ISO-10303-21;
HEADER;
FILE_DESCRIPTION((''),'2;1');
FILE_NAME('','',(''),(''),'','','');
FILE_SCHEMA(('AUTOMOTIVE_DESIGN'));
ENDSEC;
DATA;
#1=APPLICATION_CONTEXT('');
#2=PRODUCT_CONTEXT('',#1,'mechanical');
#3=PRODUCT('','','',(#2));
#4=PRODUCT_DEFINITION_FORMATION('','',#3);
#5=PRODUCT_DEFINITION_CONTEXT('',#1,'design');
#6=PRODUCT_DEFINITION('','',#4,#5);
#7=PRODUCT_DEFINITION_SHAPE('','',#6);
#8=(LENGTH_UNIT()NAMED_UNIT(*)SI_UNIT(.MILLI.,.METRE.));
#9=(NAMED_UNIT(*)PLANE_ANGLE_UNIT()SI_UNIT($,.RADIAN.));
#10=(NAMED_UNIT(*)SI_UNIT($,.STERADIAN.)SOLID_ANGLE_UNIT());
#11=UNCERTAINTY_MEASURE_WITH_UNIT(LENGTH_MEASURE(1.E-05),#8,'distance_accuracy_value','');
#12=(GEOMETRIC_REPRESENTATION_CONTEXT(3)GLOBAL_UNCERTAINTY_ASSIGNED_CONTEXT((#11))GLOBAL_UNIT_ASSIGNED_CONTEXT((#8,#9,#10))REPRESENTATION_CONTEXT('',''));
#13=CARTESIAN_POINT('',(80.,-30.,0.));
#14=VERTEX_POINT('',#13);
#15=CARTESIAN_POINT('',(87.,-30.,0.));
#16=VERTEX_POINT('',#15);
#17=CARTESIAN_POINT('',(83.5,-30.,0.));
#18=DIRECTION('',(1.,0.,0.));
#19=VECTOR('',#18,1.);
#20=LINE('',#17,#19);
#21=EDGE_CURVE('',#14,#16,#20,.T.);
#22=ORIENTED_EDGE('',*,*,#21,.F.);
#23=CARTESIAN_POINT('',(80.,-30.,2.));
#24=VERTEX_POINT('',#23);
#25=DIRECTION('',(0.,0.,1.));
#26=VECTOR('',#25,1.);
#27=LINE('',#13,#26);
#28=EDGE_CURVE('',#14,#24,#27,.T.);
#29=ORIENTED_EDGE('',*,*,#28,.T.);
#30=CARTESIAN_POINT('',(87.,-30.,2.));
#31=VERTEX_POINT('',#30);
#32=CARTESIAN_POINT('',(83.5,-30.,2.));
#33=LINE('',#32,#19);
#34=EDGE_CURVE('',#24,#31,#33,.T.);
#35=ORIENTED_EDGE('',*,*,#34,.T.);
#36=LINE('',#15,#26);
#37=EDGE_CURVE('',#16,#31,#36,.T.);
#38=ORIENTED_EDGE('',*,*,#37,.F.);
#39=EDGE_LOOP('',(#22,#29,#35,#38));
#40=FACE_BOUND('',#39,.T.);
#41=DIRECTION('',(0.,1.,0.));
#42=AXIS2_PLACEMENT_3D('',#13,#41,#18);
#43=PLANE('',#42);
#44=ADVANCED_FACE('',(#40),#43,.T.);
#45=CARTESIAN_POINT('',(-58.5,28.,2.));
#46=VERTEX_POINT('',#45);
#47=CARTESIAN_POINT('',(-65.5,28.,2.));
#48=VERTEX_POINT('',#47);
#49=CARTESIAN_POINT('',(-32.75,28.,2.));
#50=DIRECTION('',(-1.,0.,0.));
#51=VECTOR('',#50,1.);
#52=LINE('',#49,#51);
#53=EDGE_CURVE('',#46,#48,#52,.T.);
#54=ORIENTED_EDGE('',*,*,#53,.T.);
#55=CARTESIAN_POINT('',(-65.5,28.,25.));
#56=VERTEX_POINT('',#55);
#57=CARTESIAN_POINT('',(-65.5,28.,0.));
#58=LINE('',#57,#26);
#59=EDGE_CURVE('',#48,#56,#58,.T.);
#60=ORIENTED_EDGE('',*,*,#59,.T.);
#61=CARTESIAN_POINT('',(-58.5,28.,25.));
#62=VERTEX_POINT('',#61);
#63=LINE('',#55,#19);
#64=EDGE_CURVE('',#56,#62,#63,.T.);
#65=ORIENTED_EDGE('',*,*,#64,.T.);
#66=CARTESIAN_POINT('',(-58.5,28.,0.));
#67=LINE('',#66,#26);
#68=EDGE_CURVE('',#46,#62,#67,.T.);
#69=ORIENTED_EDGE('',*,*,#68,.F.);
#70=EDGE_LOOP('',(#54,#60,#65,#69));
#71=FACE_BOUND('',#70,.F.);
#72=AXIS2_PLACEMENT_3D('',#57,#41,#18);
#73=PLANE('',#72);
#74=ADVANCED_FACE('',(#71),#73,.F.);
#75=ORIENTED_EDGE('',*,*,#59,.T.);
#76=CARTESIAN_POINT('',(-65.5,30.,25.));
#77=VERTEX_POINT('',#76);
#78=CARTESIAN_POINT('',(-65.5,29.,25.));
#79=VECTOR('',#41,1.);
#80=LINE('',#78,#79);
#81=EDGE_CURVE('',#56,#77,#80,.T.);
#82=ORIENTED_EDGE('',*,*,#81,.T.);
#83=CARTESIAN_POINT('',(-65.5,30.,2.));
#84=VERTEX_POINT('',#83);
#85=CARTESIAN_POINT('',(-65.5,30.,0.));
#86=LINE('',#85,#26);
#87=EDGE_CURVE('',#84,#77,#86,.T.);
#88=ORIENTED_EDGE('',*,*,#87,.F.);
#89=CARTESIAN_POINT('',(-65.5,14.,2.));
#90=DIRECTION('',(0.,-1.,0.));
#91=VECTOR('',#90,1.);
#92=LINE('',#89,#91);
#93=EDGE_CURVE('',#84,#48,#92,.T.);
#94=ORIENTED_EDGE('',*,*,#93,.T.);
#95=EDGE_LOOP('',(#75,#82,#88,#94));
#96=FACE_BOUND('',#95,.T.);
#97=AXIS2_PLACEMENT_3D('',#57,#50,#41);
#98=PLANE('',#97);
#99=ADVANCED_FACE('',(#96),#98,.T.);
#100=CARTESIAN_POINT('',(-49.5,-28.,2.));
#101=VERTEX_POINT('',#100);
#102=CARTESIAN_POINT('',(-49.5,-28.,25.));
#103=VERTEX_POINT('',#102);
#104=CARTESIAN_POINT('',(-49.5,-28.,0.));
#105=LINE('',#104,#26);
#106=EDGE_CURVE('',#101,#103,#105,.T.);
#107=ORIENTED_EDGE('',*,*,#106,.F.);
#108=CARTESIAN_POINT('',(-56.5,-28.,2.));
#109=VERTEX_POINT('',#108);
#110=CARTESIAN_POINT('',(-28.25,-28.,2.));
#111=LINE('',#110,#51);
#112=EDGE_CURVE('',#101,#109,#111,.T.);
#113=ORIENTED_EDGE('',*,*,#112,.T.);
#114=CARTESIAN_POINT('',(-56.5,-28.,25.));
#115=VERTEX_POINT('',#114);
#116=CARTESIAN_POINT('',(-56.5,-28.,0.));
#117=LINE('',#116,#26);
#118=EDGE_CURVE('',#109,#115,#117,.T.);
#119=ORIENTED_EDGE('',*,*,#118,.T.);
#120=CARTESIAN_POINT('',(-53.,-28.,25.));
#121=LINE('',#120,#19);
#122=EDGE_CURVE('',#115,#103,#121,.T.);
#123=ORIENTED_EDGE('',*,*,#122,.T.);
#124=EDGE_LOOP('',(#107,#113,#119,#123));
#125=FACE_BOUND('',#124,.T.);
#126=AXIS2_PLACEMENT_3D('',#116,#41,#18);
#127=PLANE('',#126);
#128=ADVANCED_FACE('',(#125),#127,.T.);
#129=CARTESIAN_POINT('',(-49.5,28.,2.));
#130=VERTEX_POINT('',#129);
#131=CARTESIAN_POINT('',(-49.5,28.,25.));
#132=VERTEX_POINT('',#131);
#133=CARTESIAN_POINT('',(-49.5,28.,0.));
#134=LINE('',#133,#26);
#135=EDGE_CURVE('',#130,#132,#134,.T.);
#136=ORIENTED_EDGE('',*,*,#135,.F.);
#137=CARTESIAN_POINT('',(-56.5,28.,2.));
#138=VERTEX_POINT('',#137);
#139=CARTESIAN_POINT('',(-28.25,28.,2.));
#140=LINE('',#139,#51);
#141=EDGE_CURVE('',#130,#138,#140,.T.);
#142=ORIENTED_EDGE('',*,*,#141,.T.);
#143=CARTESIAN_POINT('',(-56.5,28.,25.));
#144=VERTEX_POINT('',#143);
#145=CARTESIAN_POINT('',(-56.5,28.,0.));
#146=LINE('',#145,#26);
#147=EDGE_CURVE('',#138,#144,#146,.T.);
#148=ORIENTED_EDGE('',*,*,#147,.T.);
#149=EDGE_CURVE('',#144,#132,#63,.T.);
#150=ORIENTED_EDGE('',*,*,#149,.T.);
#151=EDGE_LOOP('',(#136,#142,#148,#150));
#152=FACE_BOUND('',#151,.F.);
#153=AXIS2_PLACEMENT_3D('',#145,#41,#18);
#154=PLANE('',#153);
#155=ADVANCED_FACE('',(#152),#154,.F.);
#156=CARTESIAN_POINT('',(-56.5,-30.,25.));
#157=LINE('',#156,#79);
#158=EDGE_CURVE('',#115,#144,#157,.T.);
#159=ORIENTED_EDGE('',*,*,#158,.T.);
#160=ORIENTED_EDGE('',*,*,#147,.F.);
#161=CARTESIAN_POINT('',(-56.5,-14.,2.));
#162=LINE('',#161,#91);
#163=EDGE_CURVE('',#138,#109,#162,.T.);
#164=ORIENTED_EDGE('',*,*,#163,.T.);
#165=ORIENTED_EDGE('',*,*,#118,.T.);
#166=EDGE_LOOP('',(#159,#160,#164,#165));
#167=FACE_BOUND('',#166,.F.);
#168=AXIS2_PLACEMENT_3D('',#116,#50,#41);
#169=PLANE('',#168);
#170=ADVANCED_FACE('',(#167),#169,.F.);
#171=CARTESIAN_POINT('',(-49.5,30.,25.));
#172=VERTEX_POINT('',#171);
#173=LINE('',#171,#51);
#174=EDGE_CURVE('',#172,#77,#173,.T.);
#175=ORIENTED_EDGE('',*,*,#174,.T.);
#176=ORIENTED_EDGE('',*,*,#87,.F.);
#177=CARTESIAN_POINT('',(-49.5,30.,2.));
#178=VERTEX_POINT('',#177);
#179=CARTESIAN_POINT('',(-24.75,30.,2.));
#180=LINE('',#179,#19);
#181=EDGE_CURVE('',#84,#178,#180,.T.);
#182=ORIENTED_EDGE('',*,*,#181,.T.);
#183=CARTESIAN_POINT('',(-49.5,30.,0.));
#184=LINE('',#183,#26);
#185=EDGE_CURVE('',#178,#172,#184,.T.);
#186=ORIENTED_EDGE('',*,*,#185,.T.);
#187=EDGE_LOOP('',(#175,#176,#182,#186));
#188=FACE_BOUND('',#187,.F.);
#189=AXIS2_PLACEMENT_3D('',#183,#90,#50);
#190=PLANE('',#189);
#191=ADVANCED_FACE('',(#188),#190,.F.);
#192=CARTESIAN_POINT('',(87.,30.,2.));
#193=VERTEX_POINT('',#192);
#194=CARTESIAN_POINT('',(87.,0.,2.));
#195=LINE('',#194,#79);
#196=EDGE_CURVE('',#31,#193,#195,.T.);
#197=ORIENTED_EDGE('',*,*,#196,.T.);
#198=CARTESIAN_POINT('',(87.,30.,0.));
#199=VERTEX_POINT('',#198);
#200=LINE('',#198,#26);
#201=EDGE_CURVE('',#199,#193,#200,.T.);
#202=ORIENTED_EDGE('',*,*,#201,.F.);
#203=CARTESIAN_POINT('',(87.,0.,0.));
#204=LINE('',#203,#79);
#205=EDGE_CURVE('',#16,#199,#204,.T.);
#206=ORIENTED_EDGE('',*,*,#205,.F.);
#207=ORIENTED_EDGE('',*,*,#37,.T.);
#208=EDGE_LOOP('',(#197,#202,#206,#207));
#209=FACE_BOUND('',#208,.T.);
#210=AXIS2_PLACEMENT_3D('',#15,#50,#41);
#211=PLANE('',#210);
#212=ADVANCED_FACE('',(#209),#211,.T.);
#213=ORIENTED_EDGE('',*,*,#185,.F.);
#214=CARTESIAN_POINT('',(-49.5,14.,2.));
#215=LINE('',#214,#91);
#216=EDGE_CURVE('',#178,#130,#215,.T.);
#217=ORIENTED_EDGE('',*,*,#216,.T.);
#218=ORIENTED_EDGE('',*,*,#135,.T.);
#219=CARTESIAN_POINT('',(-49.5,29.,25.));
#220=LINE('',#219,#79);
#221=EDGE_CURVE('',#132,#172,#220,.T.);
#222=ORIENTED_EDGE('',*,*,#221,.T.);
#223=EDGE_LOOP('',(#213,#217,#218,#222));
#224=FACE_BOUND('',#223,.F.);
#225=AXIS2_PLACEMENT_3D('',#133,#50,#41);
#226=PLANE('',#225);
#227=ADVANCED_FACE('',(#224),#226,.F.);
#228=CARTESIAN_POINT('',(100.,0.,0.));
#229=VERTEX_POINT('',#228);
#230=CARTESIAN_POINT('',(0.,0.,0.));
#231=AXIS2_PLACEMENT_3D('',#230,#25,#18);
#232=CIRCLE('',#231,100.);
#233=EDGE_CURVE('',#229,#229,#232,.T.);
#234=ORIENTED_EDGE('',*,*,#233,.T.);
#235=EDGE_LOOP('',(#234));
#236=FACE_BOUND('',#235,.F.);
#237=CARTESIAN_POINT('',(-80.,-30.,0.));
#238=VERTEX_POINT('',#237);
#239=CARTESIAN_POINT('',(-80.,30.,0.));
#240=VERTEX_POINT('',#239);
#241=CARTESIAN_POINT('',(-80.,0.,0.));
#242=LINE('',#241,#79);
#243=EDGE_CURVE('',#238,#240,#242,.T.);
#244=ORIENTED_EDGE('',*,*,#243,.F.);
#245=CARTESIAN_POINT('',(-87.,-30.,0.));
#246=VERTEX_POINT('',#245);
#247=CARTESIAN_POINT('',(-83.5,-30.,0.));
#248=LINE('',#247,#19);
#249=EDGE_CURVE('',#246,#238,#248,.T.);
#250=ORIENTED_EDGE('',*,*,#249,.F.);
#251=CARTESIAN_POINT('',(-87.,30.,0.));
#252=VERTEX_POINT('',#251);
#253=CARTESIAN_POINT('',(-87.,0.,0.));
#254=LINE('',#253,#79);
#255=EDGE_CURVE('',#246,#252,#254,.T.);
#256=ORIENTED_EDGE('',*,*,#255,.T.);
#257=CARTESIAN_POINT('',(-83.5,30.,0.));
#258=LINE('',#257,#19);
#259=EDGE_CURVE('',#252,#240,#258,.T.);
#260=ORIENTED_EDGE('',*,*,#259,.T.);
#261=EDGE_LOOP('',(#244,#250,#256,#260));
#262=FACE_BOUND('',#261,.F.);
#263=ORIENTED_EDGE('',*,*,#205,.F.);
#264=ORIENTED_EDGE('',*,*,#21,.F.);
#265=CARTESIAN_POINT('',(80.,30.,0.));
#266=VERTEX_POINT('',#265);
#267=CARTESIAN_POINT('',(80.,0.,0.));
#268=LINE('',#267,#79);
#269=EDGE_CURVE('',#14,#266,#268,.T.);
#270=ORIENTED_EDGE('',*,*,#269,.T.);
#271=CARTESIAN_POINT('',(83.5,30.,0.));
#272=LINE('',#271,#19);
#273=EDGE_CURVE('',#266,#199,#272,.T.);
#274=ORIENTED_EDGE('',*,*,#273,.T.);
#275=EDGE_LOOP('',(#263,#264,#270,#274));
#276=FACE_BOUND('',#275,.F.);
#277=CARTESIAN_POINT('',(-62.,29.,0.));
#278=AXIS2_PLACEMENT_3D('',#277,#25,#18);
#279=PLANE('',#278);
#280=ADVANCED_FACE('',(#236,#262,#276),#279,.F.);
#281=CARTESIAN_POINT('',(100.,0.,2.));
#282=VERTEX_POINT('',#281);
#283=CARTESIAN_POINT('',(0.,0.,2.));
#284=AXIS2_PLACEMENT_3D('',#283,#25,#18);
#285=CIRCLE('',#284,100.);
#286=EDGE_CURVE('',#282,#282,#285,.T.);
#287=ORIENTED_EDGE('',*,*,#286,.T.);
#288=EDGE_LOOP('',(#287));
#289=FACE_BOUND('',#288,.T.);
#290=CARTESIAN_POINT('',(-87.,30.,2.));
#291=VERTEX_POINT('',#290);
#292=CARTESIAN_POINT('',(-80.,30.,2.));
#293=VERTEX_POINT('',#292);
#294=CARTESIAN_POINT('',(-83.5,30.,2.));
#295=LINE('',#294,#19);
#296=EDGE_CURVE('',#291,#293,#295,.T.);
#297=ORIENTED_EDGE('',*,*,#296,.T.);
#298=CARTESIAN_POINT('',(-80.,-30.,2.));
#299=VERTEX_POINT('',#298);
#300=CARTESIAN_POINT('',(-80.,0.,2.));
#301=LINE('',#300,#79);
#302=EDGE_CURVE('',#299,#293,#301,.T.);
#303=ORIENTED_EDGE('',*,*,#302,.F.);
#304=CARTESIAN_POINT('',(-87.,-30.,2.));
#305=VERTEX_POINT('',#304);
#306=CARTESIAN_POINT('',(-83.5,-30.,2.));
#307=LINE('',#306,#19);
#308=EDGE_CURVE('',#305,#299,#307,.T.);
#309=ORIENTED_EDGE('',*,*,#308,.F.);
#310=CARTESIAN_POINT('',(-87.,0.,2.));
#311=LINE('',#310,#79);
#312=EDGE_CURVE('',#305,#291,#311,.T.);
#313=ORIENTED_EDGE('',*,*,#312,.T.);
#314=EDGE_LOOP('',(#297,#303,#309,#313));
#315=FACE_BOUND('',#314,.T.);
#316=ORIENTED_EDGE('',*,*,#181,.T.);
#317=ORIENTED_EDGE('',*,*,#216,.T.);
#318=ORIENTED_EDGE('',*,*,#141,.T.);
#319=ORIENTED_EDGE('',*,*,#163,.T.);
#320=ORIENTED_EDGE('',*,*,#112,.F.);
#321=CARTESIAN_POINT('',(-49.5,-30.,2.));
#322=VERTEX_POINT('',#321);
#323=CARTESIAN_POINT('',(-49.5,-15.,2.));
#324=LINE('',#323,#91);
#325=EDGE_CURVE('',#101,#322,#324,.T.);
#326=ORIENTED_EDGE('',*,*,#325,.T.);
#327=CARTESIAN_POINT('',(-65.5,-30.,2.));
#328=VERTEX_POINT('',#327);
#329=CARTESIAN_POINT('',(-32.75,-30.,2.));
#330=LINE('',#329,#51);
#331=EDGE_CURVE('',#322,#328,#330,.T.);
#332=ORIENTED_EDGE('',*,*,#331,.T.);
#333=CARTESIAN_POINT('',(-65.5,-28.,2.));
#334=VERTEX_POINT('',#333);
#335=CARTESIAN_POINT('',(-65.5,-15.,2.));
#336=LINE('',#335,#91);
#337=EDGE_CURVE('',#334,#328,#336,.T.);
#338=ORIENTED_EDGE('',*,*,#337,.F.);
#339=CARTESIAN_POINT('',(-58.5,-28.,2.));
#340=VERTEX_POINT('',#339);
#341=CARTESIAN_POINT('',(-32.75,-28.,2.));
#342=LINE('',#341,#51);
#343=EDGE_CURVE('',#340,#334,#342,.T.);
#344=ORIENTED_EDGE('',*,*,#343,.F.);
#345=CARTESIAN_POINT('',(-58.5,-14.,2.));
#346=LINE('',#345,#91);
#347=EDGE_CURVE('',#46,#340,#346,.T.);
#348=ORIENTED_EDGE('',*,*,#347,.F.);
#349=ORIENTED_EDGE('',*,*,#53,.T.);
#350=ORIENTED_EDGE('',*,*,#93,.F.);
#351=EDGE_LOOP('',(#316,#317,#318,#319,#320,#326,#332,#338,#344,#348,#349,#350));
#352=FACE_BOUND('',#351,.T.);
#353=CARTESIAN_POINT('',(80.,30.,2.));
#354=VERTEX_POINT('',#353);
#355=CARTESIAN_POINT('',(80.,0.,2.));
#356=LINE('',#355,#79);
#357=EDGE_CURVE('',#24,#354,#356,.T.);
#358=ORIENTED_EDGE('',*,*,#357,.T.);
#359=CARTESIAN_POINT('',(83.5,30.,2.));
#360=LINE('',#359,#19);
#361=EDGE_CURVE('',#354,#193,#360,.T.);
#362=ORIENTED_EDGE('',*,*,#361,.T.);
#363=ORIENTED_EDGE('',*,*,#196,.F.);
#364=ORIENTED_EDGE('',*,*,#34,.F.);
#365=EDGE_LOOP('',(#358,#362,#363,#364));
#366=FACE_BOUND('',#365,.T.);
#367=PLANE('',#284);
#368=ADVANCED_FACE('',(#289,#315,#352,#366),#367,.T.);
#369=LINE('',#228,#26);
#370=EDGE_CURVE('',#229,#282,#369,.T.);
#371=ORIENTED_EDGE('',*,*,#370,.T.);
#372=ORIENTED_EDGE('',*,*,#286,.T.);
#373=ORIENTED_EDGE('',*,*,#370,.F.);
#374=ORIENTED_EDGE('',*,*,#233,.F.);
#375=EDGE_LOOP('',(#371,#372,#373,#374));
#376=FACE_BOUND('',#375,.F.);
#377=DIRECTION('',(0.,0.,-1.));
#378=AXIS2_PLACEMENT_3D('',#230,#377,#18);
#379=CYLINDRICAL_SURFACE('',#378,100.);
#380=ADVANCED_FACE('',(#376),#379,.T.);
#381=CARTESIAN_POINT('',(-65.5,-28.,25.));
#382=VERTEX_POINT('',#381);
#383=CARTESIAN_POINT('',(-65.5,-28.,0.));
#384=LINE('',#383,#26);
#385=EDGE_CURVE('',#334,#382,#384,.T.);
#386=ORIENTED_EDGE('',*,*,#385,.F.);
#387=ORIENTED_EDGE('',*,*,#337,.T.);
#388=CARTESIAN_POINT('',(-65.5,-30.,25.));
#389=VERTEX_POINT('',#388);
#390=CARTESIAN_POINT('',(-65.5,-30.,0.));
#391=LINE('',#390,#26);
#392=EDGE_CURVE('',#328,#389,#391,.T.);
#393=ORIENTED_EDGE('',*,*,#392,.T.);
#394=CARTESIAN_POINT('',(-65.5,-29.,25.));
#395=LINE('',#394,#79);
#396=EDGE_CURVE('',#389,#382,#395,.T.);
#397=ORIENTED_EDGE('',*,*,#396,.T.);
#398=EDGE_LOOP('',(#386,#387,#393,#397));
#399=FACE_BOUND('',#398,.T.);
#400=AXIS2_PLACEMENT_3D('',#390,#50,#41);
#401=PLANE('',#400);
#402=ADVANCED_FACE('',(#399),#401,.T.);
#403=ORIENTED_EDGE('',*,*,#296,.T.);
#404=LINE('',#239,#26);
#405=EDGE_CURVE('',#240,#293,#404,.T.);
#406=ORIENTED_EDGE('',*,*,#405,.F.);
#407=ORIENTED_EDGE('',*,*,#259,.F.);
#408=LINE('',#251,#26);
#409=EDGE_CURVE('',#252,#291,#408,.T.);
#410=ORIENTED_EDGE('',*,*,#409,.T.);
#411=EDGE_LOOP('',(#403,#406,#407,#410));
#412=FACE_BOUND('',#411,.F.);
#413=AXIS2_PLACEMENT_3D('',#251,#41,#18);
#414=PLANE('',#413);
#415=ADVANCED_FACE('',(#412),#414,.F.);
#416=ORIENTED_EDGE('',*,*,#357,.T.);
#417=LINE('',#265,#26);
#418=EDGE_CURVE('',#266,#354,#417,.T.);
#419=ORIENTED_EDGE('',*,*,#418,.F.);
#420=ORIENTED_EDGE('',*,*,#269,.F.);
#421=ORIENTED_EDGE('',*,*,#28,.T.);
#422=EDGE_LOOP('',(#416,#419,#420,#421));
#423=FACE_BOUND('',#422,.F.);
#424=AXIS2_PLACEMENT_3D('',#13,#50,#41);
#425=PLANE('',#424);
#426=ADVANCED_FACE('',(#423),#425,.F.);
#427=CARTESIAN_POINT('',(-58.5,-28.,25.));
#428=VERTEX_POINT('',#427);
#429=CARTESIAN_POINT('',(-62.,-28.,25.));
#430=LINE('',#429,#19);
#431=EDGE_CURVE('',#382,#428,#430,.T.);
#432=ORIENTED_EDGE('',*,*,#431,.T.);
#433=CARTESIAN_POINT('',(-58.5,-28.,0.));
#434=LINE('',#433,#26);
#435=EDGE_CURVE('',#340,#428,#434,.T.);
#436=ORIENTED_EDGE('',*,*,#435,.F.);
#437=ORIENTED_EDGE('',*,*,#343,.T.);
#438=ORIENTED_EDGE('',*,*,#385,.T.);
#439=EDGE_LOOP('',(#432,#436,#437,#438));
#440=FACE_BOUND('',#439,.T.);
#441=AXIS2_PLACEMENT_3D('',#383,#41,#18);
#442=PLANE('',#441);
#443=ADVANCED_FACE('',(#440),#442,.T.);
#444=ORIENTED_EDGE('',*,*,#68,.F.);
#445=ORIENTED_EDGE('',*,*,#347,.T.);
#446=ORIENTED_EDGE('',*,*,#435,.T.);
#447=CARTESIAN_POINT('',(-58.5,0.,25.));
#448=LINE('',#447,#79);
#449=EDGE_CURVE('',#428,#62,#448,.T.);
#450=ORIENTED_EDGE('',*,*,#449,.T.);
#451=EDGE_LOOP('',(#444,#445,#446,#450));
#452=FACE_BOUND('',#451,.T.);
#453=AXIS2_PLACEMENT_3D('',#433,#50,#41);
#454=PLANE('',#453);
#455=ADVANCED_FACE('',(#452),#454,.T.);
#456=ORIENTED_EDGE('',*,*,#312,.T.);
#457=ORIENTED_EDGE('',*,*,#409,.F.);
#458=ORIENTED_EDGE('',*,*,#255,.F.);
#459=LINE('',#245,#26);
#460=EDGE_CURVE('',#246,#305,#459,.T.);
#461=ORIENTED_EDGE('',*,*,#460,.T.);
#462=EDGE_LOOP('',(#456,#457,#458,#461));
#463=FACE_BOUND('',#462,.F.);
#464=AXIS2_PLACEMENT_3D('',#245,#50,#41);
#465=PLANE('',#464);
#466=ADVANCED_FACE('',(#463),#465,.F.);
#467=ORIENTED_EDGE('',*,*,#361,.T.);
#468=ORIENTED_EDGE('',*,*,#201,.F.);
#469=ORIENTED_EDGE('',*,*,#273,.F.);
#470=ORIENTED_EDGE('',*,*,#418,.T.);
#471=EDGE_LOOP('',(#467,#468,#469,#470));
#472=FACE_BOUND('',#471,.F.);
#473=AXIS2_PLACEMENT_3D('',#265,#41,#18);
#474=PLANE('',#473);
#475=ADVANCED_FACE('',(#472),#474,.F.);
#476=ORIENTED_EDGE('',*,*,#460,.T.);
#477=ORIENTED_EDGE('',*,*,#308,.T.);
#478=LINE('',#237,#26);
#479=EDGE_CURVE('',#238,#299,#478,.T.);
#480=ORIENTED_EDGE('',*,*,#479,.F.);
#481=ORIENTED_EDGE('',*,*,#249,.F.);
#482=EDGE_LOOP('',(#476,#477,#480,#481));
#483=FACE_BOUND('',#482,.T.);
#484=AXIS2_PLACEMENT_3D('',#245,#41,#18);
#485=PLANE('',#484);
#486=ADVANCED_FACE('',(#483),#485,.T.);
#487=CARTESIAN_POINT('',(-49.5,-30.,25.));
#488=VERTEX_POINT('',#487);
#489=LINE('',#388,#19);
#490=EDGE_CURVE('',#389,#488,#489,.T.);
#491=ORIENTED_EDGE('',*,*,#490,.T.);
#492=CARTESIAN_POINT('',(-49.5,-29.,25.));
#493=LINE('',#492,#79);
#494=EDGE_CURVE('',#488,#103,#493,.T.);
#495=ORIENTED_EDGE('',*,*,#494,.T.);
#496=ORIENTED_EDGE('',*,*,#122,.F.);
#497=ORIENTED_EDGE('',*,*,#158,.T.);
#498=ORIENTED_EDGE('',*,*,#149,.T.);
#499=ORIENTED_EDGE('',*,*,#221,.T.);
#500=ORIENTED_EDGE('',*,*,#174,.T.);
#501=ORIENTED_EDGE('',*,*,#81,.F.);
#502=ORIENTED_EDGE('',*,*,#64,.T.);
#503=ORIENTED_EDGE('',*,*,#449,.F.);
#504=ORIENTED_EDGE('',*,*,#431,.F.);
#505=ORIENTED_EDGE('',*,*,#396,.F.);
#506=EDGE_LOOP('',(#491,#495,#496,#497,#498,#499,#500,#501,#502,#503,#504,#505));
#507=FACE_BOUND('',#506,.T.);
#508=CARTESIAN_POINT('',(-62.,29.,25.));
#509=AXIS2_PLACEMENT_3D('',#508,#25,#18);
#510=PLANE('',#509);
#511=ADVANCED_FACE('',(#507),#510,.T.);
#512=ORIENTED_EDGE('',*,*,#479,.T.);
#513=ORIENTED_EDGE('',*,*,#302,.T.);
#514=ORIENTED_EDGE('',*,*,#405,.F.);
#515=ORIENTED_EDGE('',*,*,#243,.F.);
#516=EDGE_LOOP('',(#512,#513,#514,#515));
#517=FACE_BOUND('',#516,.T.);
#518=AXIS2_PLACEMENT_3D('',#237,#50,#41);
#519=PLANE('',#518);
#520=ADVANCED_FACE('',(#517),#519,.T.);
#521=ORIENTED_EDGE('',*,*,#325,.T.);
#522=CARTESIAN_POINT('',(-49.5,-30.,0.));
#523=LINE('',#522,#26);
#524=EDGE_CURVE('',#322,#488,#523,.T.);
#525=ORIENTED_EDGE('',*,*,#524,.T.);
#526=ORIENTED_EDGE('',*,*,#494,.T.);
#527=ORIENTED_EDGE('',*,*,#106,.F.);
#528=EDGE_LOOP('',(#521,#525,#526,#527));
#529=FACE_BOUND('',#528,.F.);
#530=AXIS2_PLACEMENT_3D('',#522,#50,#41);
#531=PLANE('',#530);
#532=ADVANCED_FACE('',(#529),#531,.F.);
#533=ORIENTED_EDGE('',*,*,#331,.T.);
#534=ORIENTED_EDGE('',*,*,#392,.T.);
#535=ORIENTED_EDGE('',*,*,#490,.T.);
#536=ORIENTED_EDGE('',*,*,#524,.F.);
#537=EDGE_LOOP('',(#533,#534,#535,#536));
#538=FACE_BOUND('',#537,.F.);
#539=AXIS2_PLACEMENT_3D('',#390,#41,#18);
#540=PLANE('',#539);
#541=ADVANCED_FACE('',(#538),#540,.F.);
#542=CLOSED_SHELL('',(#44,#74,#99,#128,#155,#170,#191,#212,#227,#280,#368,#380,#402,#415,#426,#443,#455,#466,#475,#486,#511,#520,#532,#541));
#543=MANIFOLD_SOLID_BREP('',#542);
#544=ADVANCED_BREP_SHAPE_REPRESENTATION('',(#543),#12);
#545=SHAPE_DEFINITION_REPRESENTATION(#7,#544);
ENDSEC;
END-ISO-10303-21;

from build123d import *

# Parameters (mm, degrees)
F0_R     = 100
F0_W     = 7
F0_H     = 60
F0_H_2   = 2
F0_W_2   = 2
F0_H_3   = 56
F1_DEPTH = 2
F2_DEPTH = 25


# Not quite as in the source:
# - a feature names something its author has since deleted; it is built from what else it names


with BuildPart() as f1:
    # F0 (on Top) → F1 (new body)
    with BuildSketch(Plane.XY):
        Circle(F0_R)
        with Locations((-83.5, 0)):
            Rectangle(F0_W, F0_H, mode=Mode.SUBTRACT)
        Polygon((-58.5, 30), (-56.5, 30), (-49.5, 30), (-49.5, 28), (-56.5, 28), (-56.5, -28), (-49.5, -28), (-49.5, -30), (-56.5, -30), (-58.5, -30), (-65.5, -30), (-65.5, -28), (-58.5, -28), (-58.5, 28), (-65.5, 28), (-65.5, 30), align=None, mode=Mode.SUBTRACT)
        with Locations((83.5, 0)):
            Rectangle(F0_W, F0_H, mode=Mode.SUBTRACT)
        with Locations((-62, -29)):
            Rectangle(F0_W, F0_H_2)
        with Locations((-57.5, -29)):
            Rectangle(F0_W_2, F0_H_2)
        with Locations((-53, -29)):
            Rectangle(F0_W, F0_H_2)
        with Locations((-57.5, 0)):
            Rectangle(F0_W_2, F0_H_3)
        with Locations((-62, 29)):
            Rectangle(F0_W, F0_H_2)
        with Locations((-57.5, 29)):
            Rectangle(F0_W_2, F0_H_2)
        with Locations((-53, 29)):
            Rectangle(F0_W, F0_H_2)
    extrude(amount=F1_DEPTH)

    # F0 (on Top) → F2 (join)
    with BuildSketch(Plane.XY):
        with Locations((-62, 29)):
            Rectangle(F0_W, F0_H_2)
        with Locations((-57.5, 29)):
            Rectangle(F0_W_2, F0_H_2)
        with Locations((-53, 29)):
            Rectangle(F0_W, F0_H_2)
        with Locations((-57.5, 0)):
            Rectangle(F0_W_2, F0_H_3)
        with Locations((-62, -29)):
            Rectangle(F0_W, F0_H_2)
        with Locations((-57.5, -29)):
            Rectangle(F0_W_2, F0_H_2)
        with Locations((-53, -29)):
            Rectangle(F0_W, F0_H_2)
    extrude(amount=F2_DEPTH)


solid = f1.part
